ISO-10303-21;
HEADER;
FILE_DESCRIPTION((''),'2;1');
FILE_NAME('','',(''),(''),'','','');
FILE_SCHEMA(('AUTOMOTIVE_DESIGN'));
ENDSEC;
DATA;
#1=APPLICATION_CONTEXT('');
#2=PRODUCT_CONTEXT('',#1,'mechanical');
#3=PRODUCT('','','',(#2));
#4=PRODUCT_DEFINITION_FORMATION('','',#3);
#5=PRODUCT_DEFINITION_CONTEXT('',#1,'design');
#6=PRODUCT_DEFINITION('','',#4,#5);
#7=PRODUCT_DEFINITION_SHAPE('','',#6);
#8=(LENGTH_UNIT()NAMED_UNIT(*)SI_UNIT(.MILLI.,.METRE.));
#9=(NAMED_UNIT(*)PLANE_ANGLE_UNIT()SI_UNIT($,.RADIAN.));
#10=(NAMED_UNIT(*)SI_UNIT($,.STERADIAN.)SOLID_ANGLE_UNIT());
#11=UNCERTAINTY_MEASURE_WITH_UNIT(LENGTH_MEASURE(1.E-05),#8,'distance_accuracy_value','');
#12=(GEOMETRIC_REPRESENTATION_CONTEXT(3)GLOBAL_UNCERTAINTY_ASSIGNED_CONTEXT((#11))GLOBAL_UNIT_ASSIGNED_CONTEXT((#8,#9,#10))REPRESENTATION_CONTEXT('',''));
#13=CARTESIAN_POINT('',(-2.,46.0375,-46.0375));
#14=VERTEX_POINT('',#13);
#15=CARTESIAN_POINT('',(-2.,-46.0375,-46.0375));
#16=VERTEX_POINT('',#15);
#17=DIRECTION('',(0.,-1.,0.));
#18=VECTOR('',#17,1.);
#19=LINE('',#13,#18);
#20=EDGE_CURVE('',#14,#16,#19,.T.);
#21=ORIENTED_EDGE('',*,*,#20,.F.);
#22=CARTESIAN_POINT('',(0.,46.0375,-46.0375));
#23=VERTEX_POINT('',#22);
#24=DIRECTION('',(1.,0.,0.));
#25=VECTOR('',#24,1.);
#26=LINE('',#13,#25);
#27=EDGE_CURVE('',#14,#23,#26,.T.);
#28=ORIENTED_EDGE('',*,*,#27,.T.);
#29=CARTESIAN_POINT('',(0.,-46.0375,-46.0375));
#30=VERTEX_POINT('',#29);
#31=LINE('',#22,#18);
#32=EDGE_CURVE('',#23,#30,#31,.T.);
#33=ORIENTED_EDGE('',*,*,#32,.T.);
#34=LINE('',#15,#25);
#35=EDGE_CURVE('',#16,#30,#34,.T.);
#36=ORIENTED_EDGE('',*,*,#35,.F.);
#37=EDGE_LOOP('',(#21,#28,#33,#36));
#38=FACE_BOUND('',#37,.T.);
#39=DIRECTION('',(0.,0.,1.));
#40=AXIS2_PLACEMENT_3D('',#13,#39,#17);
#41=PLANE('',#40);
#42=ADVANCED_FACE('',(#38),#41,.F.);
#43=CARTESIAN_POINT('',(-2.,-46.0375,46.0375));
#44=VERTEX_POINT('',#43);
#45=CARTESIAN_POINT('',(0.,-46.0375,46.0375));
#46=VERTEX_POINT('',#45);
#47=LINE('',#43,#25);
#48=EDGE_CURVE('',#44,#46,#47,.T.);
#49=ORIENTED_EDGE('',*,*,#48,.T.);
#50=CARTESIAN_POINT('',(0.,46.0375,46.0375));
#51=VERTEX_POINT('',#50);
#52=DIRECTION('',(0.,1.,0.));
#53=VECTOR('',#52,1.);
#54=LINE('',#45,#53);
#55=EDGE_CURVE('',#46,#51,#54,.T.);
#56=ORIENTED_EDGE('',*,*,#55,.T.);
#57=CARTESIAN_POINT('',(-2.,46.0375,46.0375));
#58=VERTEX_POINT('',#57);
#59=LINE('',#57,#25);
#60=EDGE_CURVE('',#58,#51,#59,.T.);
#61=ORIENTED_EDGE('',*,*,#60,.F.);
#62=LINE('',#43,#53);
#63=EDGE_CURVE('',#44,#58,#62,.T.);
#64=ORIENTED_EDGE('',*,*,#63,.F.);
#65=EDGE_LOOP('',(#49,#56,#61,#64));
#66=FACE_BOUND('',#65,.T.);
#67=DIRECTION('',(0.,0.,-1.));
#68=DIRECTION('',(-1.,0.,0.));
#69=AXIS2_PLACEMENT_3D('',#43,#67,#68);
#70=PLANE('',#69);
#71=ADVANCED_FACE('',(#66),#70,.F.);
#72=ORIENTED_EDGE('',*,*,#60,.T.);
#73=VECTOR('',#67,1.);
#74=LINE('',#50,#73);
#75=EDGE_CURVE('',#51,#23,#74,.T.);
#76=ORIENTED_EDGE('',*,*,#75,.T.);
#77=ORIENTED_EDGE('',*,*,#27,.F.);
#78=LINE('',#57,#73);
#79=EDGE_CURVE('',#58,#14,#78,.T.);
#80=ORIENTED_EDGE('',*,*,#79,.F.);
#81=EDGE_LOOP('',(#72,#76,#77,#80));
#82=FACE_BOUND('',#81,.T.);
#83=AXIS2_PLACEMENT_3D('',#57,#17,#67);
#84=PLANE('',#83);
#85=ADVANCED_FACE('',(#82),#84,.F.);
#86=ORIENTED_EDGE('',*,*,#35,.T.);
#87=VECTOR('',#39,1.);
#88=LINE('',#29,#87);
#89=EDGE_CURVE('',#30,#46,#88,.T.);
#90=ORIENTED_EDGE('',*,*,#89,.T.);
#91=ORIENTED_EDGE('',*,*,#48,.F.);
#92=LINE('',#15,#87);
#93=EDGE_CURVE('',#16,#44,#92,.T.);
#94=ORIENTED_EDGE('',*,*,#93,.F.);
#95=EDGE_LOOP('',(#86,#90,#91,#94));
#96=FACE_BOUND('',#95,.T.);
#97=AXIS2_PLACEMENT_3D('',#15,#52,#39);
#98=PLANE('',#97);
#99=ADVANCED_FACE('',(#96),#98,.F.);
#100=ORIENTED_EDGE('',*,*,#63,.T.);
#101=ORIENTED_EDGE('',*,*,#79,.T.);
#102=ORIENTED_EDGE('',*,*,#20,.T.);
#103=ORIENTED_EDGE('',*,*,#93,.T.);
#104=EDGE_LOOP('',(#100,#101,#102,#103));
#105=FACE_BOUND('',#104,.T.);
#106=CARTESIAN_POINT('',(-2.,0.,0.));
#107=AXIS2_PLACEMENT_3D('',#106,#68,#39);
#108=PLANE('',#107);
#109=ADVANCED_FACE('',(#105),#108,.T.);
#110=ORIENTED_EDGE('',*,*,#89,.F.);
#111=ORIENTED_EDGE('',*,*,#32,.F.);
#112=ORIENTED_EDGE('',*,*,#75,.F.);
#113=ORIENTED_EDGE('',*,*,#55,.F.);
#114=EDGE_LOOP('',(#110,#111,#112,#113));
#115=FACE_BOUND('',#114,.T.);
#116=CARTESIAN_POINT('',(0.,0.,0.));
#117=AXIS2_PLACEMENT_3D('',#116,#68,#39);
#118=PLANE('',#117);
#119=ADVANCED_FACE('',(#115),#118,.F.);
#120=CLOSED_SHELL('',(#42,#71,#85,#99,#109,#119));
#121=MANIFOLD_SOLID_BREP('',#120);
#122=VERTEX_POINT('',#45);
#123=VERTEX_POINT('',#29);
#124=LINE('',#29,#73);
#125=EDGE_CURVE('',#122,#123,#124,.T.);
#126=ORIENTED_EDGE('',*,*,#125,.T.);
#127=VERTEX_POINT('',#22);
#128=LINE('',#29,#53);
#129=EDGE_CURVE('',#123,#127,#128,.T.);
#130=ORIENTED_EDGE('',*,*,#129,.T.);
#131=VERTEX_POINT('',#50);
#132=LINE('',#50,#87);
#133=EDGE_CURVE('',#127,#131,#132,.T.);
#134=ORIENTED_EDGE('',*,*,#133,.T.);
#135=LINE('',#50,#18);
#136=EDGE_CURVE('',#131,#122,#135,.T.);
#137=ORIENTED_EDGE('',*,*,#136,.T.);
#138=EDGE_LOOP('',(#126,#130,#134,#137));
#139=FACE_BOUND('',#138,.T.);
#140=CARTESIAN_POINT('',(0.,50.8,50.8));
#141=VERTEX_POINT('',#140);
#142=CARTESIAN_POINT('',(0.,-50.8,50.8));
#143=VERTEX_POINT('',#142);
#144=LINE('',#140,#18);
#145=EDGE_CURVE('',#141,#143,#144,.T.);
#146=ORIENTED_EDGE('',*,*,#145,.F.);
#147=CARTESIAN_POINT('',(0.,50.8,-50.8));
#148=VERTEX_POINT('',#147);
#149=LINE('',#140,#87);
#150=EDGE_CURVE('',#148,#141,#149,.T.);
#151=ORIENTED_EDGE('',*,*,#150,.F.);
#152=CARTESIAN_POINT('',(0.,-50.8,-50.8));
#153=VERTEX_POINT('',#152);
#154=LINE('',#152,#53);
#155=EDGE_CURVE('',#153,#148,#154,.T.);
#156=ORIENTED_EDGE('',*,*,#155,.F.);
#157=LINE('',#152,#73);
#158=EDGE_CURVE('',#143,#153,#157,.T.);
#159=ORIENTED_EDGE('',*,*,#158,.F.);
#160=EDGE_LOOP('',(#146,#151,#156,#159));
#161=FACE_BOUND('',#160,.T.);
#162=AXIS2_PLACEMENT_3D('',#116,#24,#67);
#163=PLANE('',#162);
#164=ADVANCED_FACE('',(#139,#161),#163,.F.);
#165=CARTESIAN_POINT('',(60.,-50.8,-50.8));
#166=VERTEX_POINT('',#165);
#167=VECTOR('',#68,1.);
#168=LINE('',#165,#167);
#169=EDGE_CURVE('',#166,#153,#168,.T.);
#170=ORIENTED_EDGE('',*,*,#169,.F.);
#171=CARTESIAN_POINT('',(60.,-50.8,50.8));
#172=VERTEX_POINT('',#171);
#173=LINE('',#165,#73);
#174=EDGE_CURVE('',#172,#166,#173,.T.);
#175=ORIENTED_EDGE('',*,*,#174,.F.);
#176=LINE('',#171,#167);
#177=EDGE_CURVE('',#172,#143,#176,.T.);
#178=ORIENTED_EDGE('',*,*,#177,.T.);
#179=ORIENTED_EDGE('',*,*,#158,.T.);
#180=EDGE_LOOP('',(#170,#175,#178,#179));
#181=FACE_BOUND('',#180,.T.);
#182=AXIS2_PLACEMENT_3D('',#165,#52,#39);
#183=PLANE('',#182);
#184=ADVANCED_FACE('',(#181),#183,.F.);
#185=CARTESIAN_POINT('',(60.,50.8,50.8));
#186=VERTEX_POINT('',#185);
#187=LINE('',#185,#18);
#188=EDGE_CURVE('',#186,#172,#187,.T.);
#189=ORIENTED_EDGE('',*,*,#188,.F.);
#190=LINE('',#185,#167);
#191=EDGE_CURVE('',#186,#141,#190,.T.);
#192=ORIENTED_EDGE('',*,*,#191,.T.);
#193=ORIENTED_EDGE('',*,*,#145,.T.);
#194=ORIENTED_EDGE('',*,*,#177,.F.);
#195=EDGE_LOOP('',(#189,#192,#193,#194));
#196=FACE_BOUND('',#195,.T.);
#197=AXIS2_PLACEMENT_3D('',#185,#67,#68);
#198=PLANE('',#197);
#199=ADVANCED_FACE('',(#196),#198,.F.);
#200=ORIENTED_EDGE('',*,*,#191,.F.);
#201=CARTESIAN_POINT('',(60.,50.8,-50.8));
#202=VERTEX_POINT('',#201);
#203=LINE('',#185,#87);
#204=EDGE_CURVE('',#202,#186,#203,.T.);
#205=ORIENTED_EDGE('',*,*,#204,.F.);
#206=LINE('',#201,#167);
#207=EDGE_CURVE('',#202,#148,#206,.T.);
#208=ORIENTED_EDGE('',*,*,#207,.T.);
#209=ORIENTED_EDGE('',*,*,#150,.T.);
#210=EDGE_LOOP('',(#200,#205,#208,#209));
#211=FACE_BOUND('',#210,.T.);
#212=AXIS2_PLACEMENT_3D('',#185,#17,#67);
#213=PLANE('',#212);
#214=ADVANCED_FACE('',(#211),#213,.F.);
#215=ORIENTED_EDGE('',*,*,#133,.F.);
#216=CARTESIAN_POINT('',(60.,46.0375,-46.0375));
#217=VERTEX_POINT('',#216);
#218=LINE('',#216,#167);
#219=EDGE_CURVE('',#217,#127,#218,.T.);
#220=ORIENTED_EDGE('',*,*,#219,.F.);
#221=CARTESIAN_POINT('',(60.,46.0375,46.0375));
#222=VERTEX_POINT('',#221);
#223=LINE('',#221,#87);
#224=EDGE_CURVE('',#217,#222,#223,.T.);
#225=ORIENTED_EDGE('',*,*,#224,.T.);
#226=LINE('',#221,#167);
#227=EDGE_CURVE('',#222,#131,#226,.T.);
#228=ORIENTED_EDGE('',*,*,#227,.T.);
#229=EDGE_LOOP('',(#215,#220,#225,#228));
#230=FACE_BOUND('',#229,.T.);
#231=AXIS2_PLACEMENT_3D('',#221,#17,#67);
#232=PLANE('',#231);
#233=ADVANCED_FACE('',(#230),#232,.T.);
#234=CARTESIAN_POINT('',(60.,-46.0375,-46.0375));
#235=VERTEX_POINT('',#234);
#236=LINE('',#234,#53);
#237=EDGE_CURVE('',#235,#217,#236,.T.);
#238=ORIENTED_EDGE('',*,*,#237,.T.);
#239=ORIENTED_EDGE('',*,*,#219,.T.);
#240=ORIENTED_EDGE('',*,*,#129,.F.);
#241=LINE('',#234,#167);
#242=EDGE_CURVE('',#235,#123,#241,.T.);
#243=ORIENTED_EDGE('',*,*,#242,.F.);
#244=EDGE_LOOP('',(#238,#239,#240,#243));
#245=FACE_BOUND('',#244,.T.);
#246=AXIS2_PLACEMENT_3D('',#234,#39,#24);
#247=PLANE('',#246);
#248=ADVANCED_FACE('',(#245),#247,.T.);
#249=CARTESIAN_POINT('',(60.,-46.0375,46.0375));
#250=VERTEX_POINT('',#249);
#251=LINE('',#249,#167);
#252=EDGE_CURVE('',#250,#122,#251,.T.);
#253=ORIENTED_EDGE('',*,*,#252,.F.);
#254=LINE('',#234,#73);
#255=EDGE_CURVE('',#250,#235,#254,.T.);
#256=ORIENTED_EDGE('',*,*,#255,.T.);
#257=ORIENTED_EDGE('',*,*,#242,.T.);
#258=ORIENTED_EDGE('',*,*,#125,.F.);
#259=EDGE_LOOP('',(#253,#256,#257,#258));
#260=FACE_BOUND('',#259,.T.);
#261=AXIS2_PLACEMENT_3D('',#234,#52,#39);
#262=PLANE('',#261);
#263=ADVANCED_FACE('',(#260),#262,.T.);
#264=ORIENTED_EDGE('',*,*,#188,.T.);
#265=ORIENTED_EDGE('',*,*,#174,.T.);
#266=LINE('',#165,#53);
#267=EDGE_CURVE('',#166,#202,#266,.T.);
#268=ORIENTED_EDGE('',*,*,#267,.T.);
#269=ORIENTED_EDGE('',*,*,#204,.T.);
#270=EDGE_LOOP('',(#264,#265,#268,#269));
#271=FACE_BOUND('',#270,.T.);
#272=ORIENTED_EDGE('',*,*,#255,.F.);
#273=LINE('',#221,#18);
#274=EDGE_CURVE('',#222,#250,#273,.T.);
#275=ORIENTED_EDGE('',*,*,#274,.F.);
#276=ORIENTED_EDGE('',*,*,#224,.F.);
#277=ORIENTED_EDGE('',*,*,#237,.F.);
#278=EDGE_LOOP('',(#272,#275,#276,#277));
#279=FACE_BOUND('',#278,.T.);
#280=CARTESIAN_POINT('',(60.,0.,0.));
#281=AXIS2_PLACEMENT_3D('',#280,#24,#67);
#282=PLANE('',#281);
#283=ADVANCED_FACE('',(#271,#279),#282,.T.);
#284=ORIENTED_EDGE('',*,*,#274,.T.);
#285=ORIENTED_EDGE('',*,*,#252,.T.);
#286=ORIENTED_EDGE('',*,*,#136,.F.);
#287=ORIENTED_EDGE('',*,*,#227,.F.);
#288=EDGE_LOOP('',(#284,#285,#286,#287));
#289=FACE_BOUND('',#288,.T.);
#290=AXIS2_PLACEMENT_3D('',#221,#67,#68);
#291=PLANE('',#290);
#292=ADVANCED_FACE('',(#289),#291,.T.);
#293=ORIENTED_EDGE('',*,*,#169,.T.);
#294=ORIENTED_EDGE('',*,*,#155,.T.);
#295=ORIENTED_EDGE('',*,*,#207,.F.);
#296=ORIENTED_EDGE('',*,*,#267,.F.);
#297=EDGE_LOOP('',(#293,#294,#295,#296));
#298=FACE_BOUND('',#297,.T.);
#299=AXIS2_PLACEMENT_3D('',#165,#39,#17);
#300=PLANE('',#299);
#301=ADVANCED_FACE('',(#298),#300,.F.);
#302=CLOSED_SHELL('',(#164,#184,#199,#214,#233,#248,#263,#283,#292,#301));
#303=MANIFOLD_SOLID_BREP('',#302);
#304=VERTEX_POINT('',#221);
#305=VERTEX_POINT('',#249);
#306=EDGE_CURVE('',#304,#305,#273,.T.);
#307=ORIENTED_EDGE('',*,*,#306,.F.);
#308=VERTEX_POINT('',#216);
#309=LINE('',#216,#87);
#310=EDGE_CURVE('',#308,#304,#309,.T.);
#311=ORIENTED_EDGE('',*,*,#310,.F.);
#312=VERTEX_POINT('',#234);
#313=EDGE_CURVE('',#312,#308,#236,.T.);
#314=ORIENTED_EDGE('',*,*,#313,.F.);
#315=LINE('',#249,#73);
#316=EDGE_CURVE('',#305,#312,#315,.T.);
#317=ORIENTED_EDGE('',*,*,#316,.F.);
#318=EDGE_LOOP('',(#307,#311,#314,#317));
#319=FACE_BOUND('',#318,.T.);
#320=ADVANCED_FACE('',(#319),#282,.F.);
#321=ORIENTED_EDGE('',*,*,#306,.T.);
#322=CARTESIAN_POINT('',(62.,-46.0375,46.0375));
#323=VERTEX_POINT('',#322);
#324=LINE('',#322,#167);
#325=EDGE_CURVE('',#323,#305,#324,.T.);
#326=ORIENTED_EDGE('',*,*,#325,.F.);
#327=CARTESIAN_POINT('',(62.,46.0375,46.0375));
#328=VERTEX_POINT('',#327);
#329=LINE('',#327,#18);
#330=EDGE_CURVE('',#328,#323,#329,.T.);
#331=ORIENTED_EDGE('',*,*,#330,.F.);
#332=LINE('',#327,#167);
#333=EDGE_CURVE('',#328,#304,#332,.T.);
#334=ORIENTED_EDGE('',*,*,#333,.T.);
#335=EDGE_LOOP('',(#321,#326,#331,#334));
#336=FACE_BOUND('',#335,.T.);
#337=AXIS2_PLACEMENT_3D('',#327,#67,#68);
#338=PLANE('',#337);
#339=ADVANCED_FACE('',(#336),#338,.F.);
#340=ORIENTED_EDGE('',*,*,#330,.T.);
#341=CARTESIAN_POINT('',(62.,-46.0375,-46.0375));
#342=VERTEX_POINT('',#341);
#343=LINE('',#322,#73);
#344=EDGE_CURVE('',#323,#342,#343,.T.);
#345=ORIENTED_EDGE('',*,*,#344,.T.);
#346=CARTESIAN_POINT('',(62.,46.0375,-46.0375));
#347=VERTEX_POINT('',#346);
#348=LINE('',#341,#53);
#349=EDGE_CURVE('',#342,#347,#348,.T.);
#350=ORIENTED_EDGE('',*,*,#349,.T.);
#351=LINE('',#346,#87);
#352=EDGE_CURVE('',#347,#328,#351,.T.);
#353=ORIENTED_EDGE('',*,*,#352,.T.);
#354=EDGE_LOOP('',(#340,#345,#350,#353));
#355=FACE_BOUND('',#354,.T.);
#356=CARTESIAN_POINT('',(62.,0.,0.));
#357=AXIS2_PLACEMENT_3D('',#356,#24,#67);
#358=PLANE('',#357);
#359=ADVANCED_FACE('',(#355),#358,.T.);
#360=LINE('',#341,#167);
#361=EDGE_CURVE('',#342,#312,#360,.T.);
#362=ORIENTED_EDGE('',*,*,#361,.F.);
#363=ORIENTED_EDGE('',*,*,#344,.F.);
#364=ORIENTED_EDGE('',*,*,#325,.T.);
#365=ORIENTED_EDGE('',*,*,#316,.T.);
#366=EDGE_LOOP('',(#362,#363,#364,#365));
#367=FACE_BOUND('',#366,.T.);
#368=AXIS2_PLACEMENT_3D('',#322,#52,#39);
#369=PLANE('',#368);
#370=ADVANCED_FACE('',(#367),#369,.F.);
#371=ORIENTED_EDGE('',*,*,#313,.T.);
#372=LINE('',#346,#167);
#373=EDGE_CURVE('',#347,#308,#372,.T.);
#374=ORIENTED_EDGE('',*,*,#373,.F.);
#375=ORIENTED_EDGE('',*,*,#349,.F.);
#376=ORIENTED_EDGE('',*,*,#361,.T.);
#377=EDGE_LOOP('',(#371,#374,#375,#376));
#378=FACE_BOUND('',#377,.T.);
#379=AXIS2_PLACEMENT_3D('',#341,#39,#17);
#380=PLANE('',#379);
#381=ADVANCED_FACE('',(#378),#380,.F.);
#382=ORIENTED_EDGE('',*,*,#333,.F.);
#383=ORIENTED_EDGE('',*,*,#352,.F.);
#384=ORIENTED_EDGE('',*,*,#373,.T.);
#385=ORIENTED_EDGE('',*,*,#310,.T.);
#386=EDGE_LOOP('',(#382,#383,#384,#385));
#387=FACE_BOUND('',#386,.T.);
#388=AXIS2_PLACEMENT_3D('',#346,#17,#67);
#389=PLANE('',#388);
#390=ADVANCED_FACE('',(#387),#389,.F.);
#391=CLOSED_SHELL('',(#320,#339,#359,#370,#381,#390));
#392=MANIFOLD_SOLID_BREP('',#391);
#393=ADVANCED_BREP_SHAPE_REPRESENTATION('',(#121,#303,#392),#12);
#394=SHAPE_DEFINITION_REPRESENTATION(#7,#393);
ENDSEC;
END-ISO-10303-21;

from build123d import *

# Parameters (mm, degrees)
MEMBER_1_OUTLINE_W               = 101.6
MEMBER_1_OUTLINE_H               = 101.6
MEMBER_1_OUTLINE_W_2             = 92.075
MEMBER_1_OUTLINE_H_2             = 92.075
MEMBER_1_DEPTH                   = 60
ENDCAP_T2_STRUCTURAL_INSET       = 4.7625
ENDCAP_T2_STRUCTURAL_THICKNESS   = 2
ENDCAP_T2_STRUCTURAL_4_INSET     = 4.7625
ENDCAP_T2_STRUCTURAL_4_THICKNESS = 2


# Read off the part's stored shape, not the designer's step: the member step
with BuildPart() as part:
    # Member 1 outline → Member 1 (new body)
    with BuildSketch(Plane.YZ):
        Rectangle(MEMBER_1_OUTLINE_W, MEMBER_1_OUTLINE_H)
        Rectangle(MEMBER_1_OUTLINE_W_2, MEMBER_1_OUTLINE_H_2, mode=Mode.SUBTRACT)
    extrude(amount=MEMBER_1_DEPTH)


with BuildPart() as body_2:
    # endcap_t2_structural: an end cap: a plate 2.0 thick on the member's open end, its outline the end's outer outline set in by 4.7625
    endcap_t2_structural_end = part.part.faces().sort_by_distance((0, 49.276, 49.276))[0]
    add(extrude(Face(endcap_t2_structural_end.outer_wire().offset_2d(-ENDCAP_T2_STRUCTURAL_INSET)), amount=ENDCAP_T2_STRUCTURAL_THICKNESS, dir=(-1, 0, 0)))


with BuildPart() as body_3:
    # endcap_t2_structural 4: an end cap: a plate 2.0 thick on the member's open end, its outline the end's outer outline set in by 4.7625
    endcap_t2_structural_4_end = part.part.faces().sort_by_distance((60, 49.276, -49.276))[0]
    add(extrude(Face(endcap_t2_structural_4_end.outer_wire().offset_2d(-ENDCAP_T2_STRUCTURAL_4_INSET)), amount=ENDCAP_T2_STRUCTURAL_4_THICKNESS, dir=(1, 0, 0)))


solid = Compound([part.part, body_2.part, body_3.part])
